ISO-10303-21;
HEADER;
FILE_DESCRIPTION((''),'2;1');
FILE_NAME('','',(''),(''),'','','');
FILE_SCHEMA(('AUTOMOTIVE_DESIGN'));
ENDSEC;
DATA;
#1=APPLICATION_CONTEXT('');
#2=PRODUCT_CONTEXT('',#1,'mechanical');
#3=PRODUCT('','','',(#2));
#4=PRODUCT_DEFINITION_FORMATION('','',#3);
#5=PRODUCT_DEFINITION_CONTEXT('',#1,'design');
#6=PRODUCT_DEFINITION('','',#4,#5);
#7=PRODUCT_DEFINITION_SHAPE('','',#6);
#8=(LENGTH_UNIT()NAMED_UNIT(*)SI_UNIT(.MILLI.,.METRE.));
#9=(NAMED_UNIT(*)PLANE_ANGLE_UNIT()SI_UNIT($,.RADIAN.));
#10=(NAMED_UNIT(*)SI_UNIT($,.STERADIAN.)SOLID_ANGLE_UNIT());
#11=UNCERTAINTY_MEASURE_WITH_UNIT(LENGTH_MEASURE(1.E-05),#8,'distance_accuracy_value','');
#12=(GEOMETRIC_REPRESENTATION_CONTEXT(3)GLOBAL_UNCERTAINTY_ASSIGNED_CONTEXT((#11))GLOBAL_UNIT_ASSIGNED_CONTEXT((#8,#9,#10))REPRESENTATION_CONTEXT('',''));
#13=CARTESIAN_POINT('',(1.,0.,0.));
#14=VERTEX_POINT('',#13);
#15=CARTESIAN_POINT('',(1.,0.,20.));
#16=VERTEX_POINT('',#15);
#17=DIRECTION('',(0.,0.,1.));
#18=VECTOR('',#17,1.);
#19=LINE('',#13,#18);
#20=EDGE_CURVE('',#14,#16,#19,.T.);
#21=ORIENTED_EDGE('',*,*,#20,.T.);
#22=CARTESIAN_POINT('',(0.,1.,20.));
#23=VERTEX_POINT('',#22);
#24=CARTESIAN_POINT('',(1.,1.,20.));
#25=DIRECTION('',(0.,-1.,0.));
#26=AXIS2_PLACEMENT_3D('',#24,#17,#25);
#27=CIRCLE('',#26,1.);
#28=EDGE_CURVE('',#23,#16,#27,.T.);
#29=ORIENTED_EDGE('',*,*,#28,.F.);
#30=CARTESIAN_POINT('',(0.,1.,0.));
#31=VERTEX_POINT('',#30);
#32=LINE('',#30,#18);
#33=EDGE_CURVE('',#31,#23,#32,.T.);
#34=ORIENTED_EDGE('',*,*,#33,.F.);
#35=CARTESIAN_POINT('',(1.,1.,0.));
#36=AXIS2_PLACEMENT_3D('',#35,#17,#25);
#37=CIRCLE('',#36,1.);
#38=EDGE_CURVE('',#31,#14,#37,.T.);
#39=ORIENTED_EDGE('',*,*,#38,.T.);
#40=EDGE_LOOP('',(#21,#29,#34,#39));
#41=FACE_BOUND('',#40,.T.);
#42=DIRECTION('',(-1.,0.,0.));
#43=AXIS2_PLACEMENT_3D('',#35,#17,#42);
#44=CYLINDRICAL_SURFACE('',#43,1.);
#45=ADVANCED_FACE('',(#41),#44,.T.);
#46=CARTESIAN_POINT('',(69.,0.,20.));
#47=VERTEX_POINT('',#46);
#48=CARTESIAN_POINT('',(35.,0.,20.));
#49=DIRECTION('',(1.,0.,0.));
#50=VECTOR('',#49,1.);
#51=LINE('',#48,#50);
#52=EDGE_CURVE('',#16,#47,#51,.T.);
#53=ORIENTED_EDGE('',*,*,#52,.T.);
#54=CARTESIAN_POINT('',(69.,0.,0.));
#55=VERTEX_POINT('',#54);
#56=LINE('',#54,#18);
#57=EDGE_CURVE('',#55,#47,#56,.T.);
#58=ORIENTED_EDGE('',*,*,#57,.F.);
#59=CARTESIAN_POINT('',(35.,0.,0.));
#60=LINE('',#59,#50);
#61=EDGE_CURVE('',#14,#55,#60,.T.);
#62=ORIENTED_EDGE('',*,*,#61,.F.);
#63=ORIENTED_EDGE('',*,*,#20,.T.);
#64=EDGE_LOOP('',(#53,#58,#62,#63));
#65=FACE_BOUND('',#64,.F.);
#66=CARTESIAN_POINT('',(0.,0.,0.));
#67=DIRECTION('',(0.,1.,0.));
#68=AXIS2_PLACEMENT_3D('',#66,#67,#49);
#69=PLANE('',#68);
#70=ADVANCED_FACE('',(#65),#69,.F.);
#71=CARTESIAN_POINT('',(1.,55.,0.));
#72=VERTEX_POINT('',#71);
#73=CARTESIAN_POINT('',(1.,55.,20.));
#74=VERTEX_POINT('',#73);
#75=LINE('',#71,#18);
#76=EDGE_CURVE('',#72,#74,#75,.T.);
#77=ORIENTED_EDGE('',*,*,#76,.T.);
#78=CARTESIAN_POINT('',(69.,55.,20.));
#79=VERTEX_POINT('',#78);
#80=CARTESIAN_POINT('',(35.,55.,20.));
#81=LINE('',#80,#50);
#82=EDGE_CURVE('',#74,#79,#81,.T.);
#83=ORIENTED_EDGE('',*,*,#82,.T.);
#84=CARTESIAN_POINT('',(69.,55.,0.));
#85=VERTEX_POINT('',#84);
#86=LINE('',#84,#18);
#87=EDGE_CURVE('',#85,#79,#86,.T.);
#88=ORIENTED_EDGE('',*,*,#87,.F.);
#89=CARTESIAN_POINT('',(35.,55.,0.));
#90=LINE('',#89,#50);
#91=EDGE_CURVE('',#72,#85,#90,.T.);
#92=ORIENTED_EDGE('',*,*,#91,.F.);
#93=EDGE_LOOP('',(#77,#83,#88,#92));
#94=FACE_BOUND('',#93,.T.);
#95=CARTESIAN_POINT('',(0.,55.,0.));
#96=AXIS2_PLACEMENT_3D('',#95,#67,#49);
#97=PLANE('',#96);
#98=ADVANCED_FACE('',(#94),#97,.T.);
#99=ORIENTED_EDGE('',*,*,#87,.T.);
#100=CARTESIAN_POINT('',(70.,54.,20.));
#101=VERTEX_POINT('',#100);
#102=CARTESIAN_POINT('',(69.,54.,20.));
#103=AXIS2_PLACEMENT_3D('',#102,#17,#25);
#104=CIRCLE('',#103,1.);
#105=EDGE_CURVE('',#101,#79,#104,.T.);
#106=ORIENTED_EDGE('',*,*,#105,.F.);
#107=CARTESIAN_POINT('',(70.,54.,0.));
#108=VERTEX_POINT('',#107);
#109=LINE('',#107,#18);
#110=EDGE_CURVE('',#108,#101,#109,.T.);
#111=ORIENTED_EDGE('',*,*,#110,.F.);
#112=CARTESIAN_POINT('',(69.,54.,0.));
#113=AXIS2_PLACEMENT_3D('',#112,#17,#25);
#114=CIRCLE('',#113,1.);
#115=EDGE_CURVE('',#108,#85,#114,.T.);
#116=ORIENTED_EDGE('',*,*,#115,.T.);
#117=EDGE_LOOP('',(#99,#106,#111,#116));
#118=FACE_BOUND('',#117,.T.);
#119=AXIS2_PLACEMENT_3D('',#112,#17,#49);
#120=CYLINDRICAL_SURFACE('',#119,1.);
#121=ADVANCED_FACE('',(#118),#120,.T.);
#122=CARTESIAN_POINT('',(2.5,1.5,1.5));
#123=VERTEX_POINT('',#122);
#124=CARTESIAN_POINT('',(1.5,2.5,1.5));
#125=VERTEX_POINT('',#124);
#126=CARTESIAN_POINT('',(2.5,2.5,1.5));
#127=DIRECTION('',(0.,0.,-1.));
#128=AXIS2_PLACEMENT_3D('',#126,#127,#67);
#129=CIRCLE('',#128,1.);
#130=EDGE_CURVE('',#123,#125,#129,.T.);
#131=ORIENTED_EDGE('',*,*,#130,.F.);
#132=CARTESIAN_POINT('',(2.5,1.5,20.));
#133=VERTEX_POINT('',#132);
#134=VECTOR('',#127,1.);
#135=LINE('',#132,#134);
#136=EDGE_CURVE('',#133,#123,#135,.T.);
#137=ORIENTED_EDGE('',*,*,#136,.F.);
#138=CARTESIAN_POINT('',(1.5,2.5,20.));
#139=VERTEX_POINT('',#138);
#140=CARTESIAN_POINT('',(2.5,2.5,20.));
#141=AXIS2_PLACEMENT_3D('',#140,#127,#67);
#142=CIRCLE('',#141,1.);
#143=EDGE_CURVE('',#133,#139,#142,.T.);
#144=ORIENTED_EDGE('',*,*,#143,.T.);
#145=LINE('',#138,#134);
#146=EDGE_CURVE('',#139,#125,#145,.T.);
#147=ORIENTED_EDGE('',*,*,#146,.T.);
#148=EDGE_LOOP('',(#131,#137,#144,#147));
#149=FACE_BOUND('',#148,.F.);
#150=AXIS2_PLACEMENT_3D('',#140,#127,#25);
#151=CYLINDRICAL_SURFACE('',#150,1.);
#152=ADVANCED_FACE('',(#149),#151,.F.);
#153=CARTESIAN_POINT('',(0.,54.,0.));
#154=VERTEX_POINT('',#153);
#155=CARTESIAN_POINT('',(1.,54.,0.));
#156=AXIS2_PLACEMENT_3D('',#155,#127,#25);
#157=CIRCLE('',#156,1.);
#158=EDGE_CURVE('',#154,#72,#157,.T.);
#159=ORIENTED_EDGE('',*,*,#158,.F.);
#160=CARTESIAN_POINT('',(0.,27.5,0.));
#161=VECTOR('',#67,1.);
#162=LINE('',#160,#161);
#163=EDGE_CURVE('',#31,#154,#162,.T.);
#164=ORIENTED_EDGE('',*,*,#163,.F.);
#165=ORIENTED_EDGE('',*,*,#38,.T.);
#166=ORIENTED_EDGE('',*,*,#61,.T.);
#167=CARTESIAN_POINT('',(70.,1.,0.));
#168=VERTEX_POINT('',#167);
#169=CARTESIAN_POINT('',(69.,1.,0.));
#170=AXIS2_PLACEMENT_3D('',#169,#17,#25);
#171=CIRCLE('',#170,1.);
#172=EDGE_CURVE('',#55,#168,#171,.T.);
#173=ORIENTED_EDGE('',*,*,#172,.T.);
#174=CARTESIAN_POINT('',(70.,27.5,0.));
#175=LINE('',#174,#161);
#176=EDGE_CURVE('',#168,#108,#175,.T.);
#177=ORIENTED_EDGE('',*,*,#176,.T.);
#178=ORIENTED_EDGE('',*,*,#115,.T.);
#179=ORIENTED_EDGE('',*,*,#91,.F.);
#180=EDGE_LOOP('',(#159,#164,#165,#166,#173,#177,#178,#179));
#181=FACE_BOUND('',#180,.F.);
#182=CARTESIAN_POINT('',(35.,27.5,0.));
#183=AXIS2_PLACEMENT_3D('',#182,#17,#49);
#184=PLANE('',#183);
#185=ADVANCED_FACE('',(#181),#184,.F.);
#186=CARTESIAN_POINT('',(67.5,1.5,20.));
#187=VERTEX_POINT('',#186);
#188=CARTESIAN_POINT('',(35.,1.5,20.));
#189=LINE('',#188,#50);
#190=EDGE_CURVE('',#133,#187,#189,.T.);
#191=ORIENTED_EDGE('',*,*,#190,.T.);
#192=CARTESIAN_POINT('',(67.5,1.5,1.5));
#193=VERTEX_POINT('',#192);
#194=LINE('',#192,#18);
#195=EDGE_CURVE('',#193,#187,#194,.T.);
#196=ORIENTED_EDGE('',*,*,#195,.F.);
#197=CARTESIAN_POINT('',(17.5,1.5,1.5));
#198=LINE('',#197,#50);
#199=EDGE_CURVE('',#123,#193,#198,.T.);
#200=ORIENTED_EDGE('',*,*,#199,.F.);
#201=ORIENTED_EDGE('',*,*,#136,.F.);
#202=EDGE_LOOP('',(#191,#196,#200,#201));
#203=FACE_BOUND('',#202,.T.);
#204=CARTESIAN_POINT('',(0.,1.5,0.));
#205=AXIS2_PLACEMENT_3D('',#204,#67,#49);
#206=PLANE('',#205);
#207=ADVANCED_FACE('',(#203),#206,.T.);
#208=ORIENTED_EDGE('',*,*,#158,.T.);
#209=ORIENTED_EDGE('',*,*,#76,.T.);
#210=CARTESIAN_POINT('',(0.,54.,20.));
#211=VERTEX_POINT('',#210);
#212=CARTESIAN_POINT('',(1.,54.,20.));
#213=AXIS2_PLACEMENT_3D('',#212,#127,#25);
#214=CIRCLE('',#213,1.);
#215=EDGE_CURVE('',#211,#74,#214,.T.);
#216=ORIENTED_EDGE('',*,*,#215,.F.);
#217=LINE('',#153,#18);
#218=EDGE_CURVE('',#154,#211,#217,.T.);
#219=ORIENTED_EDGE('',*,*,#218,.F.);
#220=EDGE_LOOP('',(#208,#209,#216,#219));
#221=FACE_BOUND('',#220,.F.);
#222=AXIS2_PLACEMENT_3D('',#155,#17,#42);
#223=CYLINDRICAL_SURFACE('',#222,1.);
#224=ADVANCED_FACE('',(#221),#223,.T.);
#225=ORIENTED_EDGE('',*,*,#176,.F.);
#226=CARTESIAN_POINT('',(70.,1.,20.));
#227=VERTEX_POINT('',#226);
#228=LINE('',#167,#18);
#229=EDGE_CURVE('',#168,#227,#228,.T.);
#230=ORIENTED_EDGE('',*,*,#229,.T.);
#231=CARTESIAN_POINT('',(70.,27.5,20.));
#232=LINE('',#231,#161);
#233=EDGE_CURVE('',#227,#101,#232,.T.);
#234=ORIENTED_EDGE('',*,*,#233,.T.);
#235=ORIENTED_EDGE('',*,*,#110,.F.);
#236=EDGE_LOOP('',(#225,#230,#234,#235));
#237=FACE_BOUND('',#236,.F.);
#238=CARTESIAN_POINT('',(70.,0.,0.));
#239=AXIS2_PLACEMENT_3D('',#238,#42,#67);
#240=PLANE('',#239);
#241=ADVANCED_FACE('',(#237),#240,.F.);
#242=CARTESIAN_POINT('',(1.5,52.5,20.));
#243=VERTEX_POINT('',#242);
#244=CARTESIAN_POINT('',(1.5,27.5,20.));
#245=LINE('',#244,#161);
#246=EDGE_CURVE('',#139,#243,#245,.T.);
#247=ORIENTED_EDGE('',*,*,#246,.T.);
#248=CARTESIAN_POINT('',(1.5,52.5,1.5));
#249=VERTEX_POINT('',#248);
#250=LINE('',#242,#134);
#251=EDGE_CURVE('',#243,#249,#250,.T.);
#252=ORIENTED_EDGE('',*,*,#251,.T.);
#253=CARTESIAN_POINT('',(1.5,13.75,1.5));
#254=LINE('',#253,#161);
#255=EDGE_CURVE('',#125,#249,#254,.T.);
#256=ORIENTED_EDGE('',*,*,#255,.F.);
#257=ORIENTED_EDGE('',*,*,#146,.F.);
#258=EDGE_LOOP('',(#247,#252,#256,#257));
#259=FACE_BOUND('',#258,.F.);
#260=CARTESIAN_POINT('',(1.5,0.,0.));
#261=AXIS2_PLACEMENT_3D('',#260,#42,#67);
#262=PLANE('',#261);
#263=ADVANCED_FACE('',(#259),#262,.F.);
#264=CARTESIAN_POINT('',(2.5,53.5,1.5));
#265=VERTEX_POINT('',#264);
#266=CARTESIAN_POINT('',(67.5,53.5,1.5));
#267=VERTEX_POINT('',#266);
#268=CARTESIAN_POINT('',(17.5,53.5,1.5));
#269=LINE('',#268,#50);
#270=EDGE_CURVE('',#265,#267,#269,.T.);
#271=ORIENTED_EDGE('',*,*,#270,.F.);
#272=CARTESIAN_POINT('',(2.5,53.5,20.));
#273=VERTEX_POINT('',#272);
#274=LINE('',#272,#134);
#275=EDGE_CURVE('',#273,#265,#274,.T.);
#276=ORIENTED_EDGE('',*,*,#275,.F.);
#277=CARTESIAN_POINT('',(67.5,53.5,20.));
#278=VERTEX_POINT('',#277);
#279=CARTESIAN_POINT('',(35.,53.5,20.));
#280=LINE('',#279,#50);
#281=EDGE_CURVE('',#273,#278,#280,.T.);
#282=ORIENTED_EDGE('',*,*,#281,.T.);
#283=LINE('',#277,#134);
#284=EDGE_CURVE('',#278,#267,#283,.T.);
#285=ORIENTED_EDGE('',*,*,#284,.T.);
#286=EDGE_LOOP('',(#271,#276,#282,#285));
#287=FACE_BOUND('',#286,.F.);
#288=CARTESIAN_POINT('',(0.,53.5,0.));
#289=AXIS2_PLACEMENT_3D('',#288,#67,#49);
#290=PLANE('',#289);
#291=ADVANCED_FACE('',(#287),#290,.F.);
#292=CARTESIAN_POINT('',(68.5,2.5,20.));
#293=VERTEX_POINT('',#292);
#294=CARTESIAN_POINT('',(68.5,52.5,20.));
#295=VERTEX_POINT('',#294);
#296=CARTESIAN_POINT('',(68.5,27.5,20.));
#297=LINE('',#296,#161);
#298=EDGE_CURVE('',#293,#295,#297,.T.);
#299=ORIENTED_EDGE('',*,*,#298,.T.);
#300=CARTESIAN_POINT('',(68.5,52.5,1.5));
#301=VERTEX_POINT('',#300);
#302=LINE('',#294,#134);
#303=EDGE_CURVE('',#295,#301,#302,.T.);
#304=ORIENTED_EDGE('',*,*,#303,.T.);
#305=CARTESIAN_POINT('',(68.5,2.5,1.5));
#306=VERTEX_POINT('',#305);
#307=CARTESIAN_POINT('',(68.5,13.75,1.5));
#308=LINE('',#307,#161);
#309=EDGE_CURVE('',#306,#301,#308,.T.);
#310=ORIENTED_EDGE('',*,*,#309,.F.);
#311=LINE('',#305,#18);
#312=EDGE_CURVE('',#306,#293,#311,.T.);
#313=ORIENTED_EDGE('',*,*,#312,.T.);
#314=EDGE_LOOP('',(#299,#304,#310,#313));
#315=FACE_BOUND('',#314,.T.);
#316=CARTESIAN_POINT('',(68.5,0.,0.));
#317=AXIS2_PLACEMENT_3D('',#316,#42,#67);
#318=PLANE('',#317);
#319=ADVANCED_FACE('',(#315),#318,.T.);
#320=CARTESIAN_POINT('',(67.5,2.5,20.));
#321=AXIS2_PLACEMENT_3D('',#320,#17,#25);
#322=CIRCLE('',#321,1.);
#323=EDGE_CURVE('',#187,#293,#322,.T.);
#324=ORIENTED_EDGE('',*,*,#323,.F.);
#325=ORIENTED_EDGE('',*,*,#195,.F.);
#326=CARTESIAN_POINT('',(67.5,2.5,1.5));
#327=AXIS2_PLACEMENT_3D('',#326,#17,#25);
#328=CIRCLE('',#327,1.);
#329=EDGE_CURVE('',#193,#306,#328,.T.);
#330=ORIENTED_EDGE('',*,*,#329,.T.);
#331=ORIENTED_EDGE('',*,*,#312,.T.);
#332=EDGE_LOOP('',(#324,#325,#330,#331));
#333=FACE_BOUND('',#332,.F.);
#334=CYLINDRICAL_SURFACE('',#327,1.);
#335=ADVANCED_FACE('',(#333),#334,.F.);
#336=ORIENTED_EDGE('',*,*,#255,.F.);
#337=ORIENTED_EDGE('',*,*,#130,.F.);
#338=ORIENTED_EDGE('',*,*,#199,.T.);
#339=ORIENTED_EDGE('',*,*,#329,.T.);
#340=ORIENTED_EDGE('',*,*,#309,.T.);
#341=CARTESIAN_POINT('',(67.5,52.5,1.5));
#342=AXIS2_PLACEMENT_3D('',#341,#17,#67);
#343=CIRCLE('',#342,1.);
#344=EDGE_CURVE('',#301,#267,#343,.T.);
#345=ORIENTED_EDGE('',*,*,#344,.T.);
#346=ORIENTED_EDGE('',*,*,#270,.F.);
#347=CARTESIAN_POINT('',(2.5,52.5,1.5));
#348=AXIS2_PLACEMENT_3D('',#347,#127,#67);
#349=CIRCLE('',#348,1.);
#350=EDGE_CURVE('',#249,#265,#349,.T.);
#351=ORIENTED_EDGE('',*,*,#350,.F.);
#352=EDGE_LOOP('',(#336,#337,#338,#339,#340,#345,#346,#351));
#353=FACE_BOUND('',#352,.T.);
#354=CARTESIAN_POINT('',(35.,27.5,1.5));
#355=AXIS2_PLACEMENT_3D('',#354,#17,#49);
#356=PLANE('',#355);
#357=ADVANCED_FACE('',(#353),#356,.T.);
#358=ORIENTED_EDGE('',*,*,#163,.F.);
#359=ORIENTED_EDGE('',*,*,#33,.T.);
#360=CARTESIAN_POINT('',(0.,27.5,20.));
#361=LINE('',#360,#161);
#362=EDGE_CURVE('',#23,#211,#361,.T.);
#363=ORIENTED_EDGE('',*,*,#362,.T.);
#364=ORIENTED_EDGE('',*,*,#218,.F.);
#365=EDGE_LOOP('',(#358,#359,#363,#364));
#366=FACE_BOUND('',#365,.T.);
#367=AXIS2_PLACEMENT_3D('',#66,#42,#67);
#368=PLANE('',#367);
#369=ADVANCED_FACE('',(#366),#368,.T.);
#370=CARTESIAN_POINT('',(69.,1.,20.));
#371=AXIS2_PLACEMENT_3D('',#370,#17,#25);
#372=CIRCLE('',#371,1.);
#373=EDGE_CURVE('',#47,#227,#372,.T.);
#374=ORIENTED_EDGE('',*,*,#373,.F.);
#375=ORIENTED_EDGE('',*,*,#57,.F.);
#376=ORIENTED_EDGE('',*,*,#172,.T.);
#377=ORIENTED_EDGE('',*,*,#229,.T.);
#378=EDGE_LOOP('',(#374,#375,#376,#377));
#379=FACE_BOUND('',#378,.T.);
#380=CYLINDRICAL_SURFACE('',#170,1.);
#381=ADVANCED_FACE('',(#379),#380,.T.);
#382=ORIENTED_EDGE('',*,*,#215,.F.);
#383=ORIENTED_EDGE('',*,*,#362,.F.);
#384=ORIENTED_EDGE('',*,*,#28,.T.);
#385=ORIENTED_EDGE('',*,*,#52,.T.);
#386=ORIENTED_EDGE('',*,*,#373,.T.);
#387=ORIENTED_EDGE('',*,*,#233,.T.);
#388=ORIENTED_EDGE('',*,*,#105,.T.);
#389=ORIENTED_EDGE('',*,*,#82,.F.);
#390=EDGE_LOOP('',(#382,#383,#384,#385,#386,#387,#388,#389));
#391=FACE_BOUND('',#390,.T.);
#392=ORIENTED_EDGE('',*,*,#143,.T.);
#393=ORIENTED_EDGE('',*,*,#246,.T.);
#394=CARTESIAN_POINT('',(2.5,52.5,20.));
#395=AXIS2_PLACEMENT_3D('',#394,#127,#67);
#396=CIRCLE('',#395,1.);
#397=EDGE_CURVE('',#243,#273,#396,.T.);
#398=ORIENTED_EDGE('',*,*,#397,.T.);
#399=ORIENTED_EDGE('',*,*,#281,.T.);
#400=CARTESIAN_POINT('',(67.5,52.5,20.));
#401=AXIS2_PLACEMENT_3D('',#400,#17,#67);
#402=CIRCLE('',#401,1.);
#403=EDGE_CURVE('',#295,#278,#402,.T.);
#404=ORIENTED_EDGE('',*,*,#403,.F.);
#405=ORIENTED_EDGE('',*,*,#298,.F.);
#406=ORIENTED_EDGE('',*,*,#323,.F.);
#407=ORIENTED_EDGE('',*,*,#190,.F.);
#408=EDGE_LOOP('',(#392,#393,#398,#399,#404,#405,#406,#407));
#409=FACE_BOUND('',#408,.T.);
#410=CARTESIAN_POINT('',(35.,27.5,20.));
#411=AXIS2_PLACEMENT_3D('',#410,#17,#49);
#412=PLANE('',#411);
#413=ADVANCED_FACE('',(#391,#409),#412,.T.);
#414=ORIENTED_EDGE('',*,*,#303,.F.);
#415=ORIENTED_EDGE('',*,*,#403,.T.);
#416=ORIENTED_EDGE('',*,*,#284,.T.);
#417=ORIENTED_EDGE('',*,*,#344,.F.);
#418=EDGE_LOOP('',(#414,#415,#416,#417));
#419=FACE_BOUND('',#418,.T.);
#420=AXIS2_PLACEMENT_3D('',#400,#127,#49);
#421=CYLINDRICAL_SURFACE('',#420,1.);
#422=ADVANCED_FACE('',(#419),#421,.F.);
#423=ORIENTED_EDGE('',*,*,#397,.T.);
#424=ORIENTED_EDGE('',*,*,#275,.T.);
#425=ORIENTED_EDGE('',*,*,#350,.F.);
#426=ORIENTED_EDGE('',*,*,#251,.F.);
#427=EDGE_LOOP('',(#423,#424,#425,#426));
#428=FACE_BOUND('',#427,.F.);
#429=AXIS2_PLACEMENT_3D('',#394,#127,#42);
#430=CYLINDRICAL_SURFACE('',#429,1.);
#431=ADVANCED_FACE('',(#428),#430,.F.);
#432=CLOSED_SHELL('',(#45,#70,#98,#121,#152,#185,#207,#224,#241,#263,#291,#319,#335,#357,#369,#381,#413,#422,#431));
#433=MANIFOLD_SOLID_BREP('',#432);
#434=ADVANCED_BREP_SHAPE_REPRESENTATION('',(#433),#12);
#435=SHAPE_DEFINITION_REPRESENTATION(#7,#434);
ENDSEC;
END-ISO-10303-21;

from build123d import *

# Parameters (mm, degrees)
F0_W     = 70
F0_H     = 55
F1_DEPTH = 20
F2_T     = -1.5
F3_R     = 1
F4_R     = 1
F5_R     = 1
F6_R     = 1
F7_R     = 1
F8_R     = 1
F9_R     = 1


with BuildPart() as f1:
    # F0 (on Top) → F1 (new body)
    with BuildSketch(Plane.XY):
        with Locations((35, 27.5)):
            Rectangle(F0_W, F0_H)
    extrude(amount=F1_DEPTH)

    # F2
    f2_openings = [f1.faces().sort_by_distance(p)[0] for p in [
        (35, 27.5, 20),
    ]]
    offset(amount=F2_T, openings=f2_openings)

    # F3
    f3_edges = [f1.edges().sort_by_distance(p)[0] for p in [
        (0, 55, 10),
        (1.5, 53.5, 10.75),
    ]]
    fillet(f3_edges, radius=F3_R)

    # F4
    f4_edges = [f1.edges().sort_by_distance(p)[0] for p in [
        (0, 0, 10),
    ]]
    fillet(f4_edges, radius=F4_R)

    # F5
    f5_edges = [f1.edges().sort_by_distance(p)[0] for p in [
        (70, 0, 10),
    ]]
    fillet(f5_edges, radius=F5_R)

    # F6
    f6_edges = [f1.edges().sort_by_distance(p)[0] for p in [
        (70, 55, 10),
    ]]
    fillet(f6_edges, radius=F6_R)

    # F7
    f7_edges = [f1.edges().sort_by_distance(p)[0] for p in [
        (68.5, 1.5, 10.75),
    ]]
    fillet(f7_edges, radius=F7_R)

    # F8
    f8_edges = [f1.edges().sort_by_distance(p)[0] for p in [
        (1.5, 1.5, 10.75),
    ]]
    fillet(f8_edges, radius=F8_R)

    # F9
    f9_edges = [f1.edges().sort_by_distance(p)[0] for p in [
        (68.5, 53.5, 10.75),
    ]]
    fillet(f9_edges, radius=F9_R)


solid = f1.part
